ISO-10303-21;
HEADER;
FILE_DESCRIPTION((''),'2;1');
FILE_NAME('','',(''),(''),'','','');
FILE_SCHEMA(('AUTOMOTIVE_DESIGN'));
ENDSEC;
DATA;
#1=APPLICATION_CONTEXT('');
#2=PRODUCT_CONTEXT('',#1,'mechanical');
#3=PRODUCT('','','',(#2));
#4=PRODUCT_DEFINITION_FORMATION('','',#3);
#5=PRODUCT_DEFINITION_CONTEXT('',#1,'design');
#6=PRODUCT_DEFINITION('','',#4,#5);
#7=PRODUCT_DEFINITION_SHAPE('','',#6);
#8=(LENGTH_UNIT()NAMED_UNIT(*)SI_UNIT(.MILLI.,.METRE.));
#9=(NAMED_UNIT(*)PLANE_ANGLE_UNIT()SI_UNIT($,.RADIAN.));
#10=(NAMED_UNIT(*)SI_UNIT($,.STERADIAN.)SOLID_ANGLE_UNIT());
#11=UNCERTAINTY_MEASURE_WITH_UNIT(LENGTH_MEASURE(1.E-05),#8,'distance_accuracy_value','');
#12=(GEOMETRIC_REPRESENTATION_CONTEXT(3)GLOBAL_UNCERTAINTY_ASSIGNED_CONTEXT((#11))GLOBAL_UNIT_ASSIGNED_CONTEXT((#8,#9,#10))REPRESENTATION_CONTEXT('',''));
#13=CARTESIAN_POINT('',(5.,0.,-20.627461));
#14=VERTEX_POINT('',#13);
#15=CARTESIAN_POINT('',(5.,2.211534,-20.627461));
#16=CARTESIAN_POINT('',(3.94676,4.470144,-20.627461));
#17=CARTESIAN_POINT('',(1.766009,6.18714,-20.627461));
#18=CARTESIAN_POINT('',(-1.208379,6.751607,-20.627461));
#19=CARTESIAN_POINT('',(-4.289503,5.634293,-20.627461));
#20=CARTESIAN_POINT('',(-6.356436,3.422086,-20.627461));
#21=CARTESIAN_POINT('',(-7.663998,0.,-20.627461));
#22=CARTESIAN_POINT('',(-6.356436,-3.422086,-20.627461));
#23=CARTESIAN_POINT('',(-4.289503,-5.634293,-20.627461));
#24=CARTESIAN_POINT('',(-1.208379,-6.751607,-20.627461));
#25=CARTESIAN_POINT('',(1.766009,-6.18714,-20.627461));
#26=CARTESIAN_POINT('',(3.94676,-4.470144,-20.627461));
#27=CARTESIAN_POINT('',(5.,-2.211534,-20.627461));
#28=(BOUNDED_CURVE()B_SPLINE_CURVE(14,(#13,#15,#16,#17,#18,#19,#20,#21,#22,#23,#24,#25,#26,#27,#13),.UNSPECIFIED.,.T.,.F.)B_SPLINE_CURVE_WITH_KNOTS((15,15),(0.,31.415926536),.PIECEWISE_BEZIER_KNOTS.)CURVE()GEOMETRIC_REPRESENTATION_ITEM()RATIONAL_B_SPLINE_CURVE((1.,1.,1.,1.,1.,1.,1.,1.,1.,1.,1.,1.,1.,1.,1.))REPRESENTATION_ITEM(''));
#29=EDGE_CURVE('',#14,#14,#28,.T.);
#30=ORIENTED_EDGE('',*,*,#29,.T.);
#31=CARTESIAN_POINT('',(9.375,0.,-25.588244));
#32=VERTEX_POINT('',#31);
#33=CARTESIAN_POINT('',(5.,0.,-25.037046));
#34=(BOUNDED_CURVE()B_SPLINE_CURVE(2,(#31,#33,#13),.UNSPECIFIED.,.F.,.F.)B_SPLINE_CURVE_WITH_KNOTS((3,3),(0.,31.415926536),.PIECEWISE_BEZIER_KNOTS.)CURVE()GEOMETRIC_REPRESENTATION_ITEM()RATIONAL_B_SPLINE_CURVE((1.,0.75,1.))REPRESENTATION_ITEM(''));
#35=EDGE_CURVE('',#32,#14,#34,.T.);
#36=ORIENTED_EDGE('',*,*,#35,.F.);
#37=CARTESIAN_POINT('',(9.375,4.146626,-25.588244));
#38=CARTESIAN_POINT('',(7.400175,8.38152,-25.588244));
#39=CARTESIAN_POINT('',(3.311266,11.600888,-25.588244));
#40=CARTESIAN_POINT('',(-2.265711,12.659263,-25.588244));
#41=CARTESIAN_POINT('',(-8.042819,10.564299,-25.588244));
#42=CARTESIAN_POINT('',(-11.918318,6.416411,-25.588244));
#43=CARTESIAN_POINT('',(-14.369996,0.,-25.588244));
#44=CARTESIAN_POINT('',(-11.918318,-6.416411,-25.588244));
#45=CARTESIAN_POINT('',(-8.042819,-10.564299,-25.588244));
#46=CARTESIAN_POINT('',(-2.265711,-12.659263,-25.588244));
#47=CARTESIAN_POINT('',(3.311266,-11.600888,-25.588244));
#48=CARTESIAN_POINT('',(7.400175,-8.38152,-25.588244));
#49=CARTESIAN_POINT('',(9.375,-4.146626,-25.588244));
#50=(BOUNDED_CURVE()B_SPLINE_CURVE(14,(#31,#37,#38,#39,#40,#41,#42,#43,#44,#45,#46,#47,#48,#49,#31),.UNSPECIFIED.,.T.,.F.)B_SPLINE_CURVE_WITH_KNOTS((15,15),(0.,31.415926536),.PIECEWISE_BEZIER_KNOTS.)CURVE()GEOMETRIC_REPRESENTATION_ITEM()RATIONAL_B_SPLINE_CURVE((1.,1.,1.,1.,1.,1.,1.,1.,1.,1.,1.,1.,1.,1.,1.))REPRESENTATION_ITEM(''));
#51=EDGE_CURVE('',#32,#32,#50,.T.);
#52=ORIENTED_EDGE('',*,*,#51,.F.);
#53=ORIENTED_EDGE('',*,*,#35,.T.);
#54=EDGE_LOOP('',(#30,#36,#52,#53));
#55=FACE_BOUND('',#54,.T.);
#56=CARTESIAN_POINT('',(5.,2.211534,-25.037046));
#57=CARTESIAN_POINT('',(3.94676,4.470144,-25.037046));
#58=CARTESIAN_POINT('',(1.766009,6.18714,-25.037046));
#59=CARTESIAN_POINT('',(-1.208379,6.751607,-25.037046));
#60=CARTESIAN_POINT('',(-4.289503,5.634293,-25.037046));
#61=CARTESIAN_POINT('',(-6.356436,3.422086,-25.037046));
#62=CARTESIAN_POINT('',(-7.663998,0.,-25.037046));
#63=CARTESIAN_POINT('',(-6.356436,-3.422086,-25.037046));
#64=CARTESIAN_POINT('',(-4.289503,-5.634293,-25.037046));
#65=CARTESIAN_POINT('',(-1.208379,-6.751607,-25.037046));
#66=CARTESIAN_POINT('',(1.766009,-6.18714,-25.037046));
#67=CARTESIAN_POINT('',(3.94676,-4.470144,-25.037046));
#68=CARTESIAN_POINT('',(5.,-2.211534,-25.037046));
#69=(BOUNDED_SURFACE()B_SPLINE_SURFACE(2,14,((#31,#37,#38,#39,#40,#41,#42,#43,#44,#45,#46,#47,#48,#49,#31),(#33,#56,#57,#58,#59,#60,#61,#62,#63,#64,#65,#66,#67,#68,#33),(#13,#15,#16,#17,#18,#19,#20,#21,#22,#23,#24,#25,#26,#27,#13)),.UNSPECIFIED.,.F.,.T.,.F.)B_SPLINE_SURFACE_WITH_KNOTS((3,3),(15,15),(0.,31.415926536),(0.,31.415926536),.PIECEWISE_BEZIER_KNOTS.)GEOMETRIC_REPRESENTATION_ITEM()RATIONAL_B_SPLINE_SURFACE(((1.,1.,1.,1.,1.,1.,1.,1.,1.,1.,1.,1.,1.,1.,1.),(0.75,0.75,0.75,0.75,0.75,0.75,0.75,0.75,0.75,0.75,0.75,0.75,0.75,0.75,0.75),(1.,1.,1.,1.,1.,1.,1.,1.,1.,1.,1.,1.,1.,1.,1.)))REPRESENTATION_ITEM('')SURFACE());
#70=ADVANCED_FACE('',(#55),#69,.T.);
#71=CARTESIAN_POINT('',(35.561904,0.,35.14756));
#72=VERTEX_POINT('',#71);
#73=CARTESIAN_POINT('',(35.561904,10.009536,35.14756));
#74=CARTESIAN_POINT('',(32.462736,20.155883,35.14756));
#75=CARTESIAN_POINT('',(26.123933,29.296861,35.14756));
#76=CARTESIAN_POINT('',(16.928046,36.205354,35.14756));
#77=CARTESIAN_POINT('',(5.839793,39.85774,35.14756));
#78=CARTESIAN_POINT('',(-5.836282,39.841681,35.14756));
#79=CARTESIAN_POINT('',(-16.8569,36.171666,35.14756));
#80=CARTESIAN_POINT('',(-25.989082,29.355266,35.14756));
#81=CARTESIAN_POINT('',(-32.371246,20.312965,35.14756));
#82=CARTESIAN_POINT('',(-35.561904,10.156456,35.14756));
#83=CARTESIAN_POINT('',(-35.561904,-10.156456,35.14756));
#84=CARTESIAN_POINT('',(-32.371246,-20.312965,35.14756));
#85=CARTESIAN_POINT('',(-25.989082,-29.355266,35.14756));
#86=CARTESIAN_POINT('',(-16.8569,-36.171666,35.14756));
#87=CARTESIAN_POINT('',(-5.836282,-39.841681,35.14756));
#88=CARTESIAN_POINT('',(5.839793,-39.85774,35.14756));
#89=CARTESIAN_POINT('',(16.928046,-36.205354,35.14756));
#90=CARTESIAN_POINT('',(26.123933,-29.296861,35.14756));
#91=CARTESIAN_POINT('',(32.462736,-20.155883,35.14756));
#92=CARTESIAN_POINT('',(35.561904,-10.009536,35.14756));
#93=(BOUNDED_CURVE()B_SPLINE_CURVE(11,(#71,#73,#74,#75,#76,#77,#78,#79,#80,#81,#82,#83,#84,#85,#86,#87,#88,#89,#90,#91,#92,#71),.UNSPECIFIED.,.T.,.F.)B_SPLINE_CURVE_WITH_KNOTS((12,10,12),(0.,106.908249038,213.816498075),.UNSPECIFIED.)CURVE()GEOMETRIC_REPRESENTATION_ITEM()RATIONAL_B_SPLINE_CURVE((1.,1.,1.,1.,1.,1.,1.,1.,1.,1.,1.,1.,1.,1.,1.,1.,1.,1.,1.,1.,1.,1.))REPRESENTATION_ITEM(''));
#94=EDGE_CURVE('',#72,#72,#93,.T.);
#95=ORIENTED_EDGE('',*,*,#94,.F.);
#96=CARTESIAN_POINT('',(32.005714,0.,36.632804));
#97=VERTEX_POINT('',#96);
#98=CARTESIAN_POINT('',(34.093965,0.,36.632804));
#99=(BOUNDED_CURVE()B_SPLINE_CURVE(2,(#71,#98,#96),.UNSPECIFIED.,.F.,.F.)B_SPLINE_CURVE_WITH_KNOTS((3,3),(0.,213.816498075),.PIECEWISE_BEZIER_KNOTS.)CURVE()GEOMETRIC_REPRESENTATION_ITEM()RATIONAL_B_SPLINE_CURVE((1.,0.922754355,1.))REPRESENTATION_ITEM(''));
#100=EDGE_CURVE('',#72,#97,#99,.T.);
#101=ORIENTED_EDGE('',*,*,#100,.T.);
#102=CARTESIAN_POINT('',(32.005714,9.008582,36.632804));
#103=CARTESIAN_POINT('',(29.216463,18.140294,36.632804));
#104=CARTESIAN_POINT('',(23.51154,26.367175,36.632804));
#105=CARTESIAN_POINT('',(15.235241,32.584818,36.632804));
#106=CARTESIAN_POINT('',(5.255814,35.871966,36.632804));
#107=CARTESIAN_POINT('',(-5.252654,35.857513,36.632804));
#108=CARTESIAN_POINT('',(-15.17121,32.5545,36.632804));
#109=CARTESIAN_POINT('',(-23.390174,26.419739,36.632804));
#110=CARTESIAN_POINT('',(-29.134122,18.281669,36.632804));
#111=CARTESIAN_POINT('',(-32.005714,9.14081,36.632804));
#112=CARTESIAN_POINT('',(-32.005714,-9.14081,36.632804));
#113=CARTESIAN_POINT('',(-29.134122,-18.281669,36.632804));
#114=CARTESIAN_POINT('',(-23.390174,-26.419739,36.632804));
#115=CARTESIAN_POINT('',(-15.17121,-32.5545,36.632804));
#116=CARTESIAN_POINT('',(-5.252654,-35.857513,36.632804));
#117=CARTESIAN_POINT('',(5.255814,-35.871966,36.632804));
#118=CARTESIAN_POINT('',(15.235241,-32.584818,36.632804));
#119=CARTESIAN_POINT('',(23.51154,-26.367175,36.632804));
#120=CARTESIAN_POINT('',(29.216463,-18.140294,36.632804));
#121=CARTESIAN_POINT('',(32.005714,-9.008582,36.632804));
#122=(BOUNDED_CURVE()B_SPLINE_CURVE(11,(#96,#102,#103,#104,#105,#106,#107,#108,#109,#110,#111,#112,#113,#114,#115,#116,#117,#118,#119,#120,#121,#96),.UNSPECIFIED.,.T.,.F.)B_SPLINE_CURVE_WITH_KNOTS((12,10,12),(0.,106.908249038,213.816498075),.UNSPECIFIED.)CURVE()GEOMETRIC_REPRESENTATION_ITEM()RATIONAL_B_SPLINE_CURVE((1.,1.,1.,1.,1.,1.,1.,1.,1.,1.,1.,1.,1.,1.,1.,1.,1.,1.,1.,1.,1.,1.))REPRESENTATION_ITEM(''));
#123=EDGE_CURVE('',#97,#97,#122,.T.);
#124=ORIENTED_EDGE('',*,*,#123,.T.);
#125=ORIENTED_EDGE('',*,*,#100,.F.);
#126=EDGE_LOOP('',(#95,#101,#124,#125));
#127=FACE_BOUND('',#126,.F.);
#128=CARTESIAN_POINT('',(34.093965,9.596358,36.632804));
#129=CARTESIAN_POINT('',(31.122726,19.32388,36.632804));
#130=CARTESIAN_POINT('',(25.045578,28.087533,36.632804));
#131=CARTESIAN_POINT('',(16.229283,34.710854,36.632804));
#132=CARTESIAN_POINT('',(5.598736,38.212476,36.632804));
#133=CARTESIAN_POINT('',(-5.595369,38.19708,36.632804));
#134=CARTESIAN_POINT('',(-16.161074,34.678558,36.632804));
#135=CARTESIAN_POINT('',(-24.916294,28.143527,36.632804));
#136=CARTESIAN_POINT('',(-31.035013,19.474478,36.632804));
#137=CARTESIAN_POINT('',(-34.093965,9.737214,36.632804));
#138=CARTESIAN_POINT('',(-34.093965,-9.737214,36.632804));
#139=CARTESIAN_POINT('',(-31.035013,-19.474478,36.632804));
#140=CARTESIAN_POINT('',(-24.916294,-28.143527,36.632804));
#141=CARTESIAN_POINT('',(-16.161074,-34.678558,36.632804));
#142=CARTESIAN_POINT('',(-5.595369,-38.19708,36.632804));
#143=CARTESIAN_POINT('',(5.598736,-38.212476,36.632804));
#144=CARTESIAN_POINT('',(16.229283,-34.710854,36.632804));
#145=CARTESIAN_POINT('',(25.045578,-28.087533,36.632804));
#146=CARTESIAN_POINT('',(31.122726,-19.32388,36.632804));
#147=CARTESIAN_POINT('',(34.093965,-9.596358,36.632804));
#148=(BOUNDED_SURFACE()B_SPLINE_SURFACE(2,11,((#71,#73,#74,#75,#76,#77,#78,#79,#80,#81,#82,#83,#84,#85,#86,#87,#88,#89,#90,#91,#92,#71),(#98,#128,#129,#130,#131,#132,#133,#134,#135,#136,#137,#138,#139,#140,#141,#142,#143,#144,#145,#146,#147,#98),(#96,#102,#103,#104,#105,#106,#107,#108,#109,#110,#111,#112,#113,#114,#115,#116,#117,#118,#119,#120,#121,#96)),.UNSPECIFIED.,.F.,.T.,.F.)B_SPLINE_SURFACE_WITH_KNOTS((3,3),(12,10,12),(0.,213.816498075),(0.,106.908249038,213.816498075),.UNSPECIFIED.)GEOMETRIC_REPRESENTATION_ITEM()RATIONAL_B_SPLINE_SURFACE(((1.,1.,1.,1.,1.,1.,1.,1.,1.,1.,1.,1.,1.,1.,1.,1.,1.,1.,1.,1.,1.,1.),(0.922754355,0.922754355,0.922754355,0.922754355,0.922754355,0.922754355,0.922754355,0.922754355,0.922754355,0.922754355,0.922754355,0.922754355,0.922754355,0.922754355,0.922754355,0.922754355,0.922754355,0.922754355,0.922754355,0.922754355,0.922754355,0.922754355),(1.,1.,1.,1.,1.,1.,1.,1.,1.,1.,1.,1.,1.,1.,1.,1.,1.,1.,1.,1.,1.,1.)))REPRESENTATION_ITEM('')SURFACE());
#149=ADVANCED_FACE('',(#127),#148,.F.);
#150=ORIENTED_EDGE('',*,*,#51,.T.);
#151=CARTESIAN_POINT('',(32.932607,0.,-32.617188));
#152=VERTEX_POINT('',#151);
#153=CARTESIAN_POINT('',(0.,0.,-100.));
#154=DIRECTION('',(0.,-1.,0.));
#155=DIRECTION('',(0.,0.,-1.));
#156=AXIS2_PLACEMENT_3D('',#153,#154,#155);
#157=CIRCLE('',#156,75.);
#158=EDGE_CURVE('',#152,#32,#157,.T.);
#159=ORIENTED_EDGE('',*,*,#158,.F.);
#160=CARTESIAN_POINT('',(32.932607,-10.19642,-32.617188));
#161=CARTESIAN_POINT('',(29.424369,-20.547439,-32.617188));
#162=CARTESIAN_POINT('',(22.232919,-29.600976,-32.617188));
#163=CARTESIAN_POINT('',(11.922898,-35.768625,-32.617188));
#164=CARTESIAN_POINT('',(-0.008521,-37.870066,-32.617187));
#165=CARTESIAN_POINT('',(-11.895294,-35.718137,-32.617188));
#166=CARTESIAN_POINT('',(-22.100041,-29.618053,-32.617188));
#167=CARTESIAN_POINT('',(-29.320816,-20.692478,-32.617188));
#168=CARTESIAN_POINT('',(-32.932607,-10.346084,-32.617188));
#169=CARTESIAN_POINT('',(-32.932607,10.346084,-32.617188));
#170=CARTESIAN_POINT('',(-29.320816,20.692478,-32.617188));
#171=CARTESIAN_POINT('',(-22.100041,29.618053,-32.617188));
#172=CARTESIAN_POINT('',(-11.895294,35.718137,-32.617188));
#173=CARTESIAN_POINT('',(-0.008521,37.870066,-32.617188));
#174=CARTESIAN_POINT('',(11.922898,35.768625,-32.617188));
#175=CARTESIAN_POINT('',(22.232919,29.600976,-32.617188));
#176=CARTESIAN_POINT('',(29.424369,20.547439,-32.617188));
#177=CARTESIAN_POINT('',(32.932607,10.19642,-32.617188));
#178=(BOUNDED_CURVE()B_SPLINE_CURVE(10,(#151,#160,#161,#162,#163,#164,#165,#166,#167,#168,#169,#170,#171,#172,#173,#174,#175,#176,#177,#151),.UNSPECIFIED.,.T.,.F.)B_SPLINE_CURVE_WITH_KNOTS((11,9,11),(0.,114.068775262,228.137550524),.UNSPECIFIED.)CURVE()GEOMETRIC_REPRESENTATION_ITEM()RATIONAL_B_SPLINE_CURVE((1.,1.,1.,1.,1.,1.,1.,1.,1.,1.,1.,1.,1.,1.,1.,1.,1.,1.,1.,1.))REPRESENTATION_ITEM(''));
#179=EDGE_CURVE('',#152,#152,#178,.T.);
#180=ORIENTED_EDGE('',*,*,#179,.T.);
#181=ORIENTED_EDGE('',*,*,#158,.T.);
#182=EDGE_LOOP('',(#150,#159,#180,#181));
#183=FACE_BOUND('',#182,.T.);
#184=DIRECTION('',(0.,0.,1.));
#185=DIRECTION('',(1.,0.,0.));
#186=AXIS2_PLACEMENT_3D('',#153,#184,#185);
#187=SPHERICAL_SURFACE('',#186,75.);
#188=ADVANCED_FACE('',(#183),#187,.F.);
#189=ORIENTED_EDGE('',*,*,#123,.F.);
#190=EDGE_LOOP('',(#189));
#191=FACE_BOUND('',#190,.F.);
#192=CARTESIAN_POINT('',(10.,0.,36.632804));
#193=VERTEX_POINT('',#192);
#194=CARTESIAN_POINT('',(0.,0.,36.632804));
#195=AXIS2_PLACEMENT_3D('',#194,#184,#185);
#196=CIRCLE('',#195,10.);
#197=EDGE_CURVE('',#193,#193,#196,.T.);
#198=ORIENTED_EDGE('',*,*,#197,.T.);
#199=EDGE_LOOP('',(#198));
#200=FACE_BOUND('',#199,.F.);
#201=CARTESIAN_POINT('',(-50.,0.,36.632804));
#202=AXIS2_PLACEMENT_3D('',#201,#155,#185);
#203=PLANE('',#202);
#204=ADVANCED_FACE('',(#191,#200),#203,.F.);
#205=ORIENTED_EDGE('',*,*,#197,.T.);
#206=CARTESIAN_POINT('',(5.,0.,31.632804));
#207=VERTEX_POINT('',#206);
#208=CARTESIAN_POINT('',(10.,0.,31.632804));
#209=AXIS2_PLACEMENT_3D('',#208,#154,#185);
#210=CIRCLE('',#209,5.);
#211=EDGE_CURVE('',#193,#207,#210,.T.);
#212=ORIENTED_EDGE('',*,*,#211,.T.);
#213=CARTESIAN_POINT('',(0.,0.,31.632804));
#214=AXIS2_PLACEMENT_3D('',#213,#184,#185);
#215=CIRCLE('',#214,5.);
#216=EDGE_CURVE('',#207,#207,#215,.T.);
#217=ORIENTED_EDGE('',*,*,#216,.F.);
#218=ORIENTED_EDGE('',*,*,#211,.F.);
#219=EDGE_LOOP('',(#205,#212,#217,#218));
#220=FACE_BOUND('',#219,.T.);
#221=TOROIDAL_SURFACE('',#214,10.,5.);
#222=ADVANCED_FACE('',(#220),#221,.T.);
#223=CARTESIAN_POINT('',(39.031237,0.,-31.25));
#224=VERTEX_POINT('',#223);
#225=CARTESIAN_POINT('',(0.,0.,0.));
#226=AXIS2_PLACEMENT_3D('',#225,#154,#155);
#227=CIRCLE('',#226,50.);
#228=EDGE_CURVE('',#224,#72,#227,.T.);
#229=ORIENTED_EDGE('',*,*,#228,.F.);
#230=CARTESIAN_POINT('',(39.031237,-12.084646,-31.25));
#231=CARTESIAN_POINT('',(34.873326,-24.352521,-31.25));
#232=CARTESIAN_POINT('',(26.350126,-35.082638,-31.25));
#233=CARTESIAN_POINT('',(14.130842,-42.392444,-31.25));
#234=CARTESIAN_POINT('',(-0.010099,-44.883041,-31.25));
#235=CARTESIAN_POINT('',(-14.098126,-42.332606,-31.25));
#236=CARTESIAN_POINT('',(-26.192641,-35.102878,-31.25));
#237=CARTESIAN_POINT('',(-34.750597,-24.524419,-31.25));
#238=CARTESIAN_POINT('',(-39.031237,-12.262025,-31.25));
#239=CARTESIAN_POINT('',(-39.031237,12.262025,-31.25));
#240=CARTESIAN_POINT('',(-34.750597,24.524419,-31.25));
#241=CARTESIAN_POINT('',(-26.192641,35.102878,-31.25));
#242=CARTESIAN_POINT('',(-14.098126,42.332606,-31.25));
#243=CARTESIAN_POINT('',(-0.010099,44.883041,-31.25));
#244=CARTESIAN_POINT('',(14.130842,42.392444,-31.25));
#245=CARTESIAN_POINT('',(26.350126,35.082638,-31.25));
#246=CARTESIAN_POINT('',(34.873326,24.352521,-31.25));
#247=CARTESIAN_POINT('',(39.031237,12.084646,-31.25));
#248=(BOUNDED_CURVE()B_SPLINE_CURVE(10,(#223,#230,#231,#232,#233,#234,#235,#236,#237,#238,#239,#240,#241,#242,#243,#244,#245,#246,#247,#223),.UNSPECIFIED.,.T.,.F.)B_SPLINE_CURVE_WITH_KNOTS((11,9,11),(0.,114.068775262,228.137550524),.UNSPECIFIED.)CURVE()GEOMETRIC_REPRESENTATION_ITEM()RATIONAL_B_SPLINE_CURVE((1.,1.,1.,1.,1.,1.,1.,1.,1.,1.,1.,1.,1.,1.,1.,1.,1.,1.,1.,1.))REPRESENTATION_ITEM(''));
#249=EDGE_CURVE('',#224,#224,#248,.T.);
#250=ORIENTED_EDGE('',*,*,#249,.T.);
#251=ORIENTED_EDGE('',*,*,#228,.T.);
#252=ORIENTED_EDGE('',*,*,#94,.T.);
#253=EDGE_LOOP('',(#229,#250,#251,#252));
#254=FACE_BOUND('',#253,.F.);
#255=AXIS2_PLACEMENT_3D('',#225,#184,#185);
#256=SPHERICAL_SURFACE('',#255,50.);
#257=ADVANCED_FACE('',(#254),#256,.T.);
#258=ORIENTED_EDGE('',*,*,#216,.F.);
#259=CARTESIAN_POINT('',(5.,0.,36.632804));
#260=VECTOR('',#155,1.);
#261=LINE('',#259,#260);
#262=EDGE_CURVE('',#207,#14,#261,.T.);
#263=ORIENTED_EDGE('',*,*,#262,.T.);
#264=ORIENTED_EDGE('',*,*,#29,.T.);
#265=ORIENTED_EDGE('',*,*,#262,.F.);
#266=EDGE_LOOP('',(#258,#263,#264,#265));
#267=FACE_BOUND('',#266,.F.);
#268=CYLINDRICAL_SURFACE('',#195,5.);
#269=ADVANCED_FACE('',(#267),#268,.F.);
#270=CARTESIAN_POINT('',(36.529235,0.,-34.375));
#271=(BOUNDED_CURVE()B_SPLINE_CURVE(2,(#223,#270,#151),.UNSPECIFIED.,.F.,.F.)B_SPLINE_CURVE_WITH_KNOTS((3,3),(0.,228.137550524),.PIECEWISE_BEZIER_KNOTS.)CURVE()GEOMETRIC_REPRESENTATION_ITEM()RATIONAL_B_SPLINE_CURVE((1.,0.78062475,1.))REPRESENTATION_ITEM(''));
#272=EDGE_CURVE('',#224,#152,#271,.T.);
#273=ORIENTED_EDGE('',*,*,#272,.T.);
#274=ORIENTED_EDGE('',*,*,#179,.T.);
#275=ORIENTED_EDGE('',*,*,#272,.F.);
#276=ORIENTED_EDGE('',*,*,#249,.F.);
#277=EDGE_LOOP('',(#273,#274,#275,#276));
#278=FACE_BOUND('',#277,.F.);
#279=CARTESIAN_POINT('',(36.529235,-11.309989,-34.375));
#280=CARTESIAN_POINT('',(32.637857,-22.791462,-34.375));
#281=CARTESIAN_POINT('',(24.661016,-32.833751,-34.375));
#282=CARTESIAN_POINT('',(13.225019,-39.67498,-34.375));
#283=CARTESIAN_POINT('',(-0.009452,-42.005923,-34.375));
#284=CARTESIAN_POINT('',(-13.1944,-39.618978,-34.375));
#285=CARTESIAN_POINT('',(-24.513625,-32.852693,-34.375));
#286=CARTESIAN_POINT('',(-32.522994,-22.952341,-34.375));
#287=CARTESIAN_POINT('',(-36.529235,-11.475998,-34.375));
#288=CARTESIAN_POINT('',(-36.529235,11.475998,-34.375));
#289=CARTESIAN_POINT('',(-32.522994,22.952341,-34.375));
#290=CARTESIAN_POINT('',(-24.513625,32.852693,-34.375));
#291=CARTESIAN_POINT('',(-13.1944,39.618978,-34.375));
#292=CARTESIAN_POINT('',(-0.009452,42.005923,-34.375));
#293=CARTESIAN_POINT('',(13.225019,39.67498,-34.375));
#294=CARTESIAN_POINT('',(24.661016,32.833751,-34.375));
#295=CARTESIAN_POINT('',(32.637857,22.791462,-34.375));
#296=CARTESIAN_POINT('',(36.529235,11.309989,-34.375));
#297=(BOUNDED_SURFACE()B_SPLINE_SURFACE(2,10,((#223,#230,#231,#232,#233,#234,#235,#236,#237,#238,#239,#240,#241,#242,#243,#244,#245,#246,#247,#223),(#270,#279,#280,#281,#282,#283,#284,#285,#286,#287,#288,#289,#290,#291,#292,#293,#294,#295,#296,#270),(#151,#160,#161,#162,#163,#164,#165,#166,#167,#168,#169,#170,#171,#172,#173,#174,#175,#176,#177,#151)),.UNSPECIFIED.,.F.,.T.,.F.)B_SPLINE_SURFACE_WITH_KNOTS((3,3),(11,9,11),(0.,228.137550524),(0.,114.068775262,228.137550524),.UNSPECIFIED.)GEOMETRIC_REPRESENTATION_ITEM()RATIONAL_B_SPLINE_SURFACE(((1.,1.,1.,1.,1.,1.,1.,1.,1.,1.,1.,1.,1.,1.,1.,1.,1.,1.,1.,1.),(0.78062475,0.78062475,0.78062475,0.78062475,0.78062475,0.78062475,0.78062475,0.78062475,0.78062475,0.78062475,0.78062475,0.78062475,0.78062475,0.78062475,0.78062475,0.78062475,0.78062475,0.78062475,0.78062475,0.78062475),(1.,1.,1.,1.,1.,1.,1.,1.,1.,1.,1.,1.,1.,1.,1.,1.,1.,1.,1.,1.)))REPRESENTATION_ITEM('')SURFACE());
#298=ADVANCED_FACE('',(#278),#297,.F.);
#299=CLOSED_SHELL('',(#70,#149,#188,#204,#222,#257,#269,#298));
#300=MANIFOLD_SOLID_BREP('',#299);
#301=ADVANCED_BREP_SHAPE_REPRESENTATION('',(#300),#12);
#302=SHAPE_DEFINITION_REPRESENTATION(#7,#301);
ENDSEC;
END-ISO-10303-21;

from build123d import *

# Parameters (mm, degrees)
F2_W     = 100
F2_H     = 20
F3_DEPTH = 40
F6_R     = 5
F7_DEPTH = 71.0088039765
F8_R     = 5
F9_R     = 5


with BuildPart() as f1:
    # F0 (on Front) → F1 (revolve)
    with BuildSketch(Plane.XZ):
        with BuildLine():
            Line((0, 50), (0, -50))
            ThreePointArc((0, -50), (50, 0), (0, 50))
        make_face()
    revolve(axis=Axis((0, 0, -1.8287375569), (0, 0, -1)))

    # F2 (on Front) → F3 (cut, symmetric)
    with BuildSketch(Plane.XZ):
        with Locations((0, 46.6328039765)):
            Rectangle(F2_W, F2_H)
    extrude(amount=F3_DEPTH, both=True, mode=Mode.SUBTRACT)

    # F4 (on Front) → F5 (revolve, cut)
    with BuildSketch(Plane.XZ):
        with BuildLine():
            Line((0, -25), (0, -175))
            ThreePointArc((0, -175), (75, -100), (0, -25))
        make_face()
    revolve(axis=Axis((0, 0, -99.9178830534), (0, 0, -1)), mode=Mode.SUBTRACT)

    # F6 (on face) → F7 (cut, through all)
    with BuildSketch(Plane.XY.offset(36.6328039765)):
        Circle(F6_R)
    extrude(amount=-F7_DEPTH, mode=Mode.SUBTRACT)

    # F8
    f8_edges = [f1.edges().sort_by_distance(p)[0] for p in [
        (-34.029953, 0, 36.632804),
    ]]
    fillet(f8_edges, radius=F8_R)

    # F9
    f9_edges = [f1.edges().sort_by_distance(p)[0] for p in [
        (-5, 0, 36.632804),
        (-36.309219, 0, -34.375),
        (-5, 0, -25.166852),
    ]]
    fillet(f9_edges, radius=F9_R)


solid = f1.part
